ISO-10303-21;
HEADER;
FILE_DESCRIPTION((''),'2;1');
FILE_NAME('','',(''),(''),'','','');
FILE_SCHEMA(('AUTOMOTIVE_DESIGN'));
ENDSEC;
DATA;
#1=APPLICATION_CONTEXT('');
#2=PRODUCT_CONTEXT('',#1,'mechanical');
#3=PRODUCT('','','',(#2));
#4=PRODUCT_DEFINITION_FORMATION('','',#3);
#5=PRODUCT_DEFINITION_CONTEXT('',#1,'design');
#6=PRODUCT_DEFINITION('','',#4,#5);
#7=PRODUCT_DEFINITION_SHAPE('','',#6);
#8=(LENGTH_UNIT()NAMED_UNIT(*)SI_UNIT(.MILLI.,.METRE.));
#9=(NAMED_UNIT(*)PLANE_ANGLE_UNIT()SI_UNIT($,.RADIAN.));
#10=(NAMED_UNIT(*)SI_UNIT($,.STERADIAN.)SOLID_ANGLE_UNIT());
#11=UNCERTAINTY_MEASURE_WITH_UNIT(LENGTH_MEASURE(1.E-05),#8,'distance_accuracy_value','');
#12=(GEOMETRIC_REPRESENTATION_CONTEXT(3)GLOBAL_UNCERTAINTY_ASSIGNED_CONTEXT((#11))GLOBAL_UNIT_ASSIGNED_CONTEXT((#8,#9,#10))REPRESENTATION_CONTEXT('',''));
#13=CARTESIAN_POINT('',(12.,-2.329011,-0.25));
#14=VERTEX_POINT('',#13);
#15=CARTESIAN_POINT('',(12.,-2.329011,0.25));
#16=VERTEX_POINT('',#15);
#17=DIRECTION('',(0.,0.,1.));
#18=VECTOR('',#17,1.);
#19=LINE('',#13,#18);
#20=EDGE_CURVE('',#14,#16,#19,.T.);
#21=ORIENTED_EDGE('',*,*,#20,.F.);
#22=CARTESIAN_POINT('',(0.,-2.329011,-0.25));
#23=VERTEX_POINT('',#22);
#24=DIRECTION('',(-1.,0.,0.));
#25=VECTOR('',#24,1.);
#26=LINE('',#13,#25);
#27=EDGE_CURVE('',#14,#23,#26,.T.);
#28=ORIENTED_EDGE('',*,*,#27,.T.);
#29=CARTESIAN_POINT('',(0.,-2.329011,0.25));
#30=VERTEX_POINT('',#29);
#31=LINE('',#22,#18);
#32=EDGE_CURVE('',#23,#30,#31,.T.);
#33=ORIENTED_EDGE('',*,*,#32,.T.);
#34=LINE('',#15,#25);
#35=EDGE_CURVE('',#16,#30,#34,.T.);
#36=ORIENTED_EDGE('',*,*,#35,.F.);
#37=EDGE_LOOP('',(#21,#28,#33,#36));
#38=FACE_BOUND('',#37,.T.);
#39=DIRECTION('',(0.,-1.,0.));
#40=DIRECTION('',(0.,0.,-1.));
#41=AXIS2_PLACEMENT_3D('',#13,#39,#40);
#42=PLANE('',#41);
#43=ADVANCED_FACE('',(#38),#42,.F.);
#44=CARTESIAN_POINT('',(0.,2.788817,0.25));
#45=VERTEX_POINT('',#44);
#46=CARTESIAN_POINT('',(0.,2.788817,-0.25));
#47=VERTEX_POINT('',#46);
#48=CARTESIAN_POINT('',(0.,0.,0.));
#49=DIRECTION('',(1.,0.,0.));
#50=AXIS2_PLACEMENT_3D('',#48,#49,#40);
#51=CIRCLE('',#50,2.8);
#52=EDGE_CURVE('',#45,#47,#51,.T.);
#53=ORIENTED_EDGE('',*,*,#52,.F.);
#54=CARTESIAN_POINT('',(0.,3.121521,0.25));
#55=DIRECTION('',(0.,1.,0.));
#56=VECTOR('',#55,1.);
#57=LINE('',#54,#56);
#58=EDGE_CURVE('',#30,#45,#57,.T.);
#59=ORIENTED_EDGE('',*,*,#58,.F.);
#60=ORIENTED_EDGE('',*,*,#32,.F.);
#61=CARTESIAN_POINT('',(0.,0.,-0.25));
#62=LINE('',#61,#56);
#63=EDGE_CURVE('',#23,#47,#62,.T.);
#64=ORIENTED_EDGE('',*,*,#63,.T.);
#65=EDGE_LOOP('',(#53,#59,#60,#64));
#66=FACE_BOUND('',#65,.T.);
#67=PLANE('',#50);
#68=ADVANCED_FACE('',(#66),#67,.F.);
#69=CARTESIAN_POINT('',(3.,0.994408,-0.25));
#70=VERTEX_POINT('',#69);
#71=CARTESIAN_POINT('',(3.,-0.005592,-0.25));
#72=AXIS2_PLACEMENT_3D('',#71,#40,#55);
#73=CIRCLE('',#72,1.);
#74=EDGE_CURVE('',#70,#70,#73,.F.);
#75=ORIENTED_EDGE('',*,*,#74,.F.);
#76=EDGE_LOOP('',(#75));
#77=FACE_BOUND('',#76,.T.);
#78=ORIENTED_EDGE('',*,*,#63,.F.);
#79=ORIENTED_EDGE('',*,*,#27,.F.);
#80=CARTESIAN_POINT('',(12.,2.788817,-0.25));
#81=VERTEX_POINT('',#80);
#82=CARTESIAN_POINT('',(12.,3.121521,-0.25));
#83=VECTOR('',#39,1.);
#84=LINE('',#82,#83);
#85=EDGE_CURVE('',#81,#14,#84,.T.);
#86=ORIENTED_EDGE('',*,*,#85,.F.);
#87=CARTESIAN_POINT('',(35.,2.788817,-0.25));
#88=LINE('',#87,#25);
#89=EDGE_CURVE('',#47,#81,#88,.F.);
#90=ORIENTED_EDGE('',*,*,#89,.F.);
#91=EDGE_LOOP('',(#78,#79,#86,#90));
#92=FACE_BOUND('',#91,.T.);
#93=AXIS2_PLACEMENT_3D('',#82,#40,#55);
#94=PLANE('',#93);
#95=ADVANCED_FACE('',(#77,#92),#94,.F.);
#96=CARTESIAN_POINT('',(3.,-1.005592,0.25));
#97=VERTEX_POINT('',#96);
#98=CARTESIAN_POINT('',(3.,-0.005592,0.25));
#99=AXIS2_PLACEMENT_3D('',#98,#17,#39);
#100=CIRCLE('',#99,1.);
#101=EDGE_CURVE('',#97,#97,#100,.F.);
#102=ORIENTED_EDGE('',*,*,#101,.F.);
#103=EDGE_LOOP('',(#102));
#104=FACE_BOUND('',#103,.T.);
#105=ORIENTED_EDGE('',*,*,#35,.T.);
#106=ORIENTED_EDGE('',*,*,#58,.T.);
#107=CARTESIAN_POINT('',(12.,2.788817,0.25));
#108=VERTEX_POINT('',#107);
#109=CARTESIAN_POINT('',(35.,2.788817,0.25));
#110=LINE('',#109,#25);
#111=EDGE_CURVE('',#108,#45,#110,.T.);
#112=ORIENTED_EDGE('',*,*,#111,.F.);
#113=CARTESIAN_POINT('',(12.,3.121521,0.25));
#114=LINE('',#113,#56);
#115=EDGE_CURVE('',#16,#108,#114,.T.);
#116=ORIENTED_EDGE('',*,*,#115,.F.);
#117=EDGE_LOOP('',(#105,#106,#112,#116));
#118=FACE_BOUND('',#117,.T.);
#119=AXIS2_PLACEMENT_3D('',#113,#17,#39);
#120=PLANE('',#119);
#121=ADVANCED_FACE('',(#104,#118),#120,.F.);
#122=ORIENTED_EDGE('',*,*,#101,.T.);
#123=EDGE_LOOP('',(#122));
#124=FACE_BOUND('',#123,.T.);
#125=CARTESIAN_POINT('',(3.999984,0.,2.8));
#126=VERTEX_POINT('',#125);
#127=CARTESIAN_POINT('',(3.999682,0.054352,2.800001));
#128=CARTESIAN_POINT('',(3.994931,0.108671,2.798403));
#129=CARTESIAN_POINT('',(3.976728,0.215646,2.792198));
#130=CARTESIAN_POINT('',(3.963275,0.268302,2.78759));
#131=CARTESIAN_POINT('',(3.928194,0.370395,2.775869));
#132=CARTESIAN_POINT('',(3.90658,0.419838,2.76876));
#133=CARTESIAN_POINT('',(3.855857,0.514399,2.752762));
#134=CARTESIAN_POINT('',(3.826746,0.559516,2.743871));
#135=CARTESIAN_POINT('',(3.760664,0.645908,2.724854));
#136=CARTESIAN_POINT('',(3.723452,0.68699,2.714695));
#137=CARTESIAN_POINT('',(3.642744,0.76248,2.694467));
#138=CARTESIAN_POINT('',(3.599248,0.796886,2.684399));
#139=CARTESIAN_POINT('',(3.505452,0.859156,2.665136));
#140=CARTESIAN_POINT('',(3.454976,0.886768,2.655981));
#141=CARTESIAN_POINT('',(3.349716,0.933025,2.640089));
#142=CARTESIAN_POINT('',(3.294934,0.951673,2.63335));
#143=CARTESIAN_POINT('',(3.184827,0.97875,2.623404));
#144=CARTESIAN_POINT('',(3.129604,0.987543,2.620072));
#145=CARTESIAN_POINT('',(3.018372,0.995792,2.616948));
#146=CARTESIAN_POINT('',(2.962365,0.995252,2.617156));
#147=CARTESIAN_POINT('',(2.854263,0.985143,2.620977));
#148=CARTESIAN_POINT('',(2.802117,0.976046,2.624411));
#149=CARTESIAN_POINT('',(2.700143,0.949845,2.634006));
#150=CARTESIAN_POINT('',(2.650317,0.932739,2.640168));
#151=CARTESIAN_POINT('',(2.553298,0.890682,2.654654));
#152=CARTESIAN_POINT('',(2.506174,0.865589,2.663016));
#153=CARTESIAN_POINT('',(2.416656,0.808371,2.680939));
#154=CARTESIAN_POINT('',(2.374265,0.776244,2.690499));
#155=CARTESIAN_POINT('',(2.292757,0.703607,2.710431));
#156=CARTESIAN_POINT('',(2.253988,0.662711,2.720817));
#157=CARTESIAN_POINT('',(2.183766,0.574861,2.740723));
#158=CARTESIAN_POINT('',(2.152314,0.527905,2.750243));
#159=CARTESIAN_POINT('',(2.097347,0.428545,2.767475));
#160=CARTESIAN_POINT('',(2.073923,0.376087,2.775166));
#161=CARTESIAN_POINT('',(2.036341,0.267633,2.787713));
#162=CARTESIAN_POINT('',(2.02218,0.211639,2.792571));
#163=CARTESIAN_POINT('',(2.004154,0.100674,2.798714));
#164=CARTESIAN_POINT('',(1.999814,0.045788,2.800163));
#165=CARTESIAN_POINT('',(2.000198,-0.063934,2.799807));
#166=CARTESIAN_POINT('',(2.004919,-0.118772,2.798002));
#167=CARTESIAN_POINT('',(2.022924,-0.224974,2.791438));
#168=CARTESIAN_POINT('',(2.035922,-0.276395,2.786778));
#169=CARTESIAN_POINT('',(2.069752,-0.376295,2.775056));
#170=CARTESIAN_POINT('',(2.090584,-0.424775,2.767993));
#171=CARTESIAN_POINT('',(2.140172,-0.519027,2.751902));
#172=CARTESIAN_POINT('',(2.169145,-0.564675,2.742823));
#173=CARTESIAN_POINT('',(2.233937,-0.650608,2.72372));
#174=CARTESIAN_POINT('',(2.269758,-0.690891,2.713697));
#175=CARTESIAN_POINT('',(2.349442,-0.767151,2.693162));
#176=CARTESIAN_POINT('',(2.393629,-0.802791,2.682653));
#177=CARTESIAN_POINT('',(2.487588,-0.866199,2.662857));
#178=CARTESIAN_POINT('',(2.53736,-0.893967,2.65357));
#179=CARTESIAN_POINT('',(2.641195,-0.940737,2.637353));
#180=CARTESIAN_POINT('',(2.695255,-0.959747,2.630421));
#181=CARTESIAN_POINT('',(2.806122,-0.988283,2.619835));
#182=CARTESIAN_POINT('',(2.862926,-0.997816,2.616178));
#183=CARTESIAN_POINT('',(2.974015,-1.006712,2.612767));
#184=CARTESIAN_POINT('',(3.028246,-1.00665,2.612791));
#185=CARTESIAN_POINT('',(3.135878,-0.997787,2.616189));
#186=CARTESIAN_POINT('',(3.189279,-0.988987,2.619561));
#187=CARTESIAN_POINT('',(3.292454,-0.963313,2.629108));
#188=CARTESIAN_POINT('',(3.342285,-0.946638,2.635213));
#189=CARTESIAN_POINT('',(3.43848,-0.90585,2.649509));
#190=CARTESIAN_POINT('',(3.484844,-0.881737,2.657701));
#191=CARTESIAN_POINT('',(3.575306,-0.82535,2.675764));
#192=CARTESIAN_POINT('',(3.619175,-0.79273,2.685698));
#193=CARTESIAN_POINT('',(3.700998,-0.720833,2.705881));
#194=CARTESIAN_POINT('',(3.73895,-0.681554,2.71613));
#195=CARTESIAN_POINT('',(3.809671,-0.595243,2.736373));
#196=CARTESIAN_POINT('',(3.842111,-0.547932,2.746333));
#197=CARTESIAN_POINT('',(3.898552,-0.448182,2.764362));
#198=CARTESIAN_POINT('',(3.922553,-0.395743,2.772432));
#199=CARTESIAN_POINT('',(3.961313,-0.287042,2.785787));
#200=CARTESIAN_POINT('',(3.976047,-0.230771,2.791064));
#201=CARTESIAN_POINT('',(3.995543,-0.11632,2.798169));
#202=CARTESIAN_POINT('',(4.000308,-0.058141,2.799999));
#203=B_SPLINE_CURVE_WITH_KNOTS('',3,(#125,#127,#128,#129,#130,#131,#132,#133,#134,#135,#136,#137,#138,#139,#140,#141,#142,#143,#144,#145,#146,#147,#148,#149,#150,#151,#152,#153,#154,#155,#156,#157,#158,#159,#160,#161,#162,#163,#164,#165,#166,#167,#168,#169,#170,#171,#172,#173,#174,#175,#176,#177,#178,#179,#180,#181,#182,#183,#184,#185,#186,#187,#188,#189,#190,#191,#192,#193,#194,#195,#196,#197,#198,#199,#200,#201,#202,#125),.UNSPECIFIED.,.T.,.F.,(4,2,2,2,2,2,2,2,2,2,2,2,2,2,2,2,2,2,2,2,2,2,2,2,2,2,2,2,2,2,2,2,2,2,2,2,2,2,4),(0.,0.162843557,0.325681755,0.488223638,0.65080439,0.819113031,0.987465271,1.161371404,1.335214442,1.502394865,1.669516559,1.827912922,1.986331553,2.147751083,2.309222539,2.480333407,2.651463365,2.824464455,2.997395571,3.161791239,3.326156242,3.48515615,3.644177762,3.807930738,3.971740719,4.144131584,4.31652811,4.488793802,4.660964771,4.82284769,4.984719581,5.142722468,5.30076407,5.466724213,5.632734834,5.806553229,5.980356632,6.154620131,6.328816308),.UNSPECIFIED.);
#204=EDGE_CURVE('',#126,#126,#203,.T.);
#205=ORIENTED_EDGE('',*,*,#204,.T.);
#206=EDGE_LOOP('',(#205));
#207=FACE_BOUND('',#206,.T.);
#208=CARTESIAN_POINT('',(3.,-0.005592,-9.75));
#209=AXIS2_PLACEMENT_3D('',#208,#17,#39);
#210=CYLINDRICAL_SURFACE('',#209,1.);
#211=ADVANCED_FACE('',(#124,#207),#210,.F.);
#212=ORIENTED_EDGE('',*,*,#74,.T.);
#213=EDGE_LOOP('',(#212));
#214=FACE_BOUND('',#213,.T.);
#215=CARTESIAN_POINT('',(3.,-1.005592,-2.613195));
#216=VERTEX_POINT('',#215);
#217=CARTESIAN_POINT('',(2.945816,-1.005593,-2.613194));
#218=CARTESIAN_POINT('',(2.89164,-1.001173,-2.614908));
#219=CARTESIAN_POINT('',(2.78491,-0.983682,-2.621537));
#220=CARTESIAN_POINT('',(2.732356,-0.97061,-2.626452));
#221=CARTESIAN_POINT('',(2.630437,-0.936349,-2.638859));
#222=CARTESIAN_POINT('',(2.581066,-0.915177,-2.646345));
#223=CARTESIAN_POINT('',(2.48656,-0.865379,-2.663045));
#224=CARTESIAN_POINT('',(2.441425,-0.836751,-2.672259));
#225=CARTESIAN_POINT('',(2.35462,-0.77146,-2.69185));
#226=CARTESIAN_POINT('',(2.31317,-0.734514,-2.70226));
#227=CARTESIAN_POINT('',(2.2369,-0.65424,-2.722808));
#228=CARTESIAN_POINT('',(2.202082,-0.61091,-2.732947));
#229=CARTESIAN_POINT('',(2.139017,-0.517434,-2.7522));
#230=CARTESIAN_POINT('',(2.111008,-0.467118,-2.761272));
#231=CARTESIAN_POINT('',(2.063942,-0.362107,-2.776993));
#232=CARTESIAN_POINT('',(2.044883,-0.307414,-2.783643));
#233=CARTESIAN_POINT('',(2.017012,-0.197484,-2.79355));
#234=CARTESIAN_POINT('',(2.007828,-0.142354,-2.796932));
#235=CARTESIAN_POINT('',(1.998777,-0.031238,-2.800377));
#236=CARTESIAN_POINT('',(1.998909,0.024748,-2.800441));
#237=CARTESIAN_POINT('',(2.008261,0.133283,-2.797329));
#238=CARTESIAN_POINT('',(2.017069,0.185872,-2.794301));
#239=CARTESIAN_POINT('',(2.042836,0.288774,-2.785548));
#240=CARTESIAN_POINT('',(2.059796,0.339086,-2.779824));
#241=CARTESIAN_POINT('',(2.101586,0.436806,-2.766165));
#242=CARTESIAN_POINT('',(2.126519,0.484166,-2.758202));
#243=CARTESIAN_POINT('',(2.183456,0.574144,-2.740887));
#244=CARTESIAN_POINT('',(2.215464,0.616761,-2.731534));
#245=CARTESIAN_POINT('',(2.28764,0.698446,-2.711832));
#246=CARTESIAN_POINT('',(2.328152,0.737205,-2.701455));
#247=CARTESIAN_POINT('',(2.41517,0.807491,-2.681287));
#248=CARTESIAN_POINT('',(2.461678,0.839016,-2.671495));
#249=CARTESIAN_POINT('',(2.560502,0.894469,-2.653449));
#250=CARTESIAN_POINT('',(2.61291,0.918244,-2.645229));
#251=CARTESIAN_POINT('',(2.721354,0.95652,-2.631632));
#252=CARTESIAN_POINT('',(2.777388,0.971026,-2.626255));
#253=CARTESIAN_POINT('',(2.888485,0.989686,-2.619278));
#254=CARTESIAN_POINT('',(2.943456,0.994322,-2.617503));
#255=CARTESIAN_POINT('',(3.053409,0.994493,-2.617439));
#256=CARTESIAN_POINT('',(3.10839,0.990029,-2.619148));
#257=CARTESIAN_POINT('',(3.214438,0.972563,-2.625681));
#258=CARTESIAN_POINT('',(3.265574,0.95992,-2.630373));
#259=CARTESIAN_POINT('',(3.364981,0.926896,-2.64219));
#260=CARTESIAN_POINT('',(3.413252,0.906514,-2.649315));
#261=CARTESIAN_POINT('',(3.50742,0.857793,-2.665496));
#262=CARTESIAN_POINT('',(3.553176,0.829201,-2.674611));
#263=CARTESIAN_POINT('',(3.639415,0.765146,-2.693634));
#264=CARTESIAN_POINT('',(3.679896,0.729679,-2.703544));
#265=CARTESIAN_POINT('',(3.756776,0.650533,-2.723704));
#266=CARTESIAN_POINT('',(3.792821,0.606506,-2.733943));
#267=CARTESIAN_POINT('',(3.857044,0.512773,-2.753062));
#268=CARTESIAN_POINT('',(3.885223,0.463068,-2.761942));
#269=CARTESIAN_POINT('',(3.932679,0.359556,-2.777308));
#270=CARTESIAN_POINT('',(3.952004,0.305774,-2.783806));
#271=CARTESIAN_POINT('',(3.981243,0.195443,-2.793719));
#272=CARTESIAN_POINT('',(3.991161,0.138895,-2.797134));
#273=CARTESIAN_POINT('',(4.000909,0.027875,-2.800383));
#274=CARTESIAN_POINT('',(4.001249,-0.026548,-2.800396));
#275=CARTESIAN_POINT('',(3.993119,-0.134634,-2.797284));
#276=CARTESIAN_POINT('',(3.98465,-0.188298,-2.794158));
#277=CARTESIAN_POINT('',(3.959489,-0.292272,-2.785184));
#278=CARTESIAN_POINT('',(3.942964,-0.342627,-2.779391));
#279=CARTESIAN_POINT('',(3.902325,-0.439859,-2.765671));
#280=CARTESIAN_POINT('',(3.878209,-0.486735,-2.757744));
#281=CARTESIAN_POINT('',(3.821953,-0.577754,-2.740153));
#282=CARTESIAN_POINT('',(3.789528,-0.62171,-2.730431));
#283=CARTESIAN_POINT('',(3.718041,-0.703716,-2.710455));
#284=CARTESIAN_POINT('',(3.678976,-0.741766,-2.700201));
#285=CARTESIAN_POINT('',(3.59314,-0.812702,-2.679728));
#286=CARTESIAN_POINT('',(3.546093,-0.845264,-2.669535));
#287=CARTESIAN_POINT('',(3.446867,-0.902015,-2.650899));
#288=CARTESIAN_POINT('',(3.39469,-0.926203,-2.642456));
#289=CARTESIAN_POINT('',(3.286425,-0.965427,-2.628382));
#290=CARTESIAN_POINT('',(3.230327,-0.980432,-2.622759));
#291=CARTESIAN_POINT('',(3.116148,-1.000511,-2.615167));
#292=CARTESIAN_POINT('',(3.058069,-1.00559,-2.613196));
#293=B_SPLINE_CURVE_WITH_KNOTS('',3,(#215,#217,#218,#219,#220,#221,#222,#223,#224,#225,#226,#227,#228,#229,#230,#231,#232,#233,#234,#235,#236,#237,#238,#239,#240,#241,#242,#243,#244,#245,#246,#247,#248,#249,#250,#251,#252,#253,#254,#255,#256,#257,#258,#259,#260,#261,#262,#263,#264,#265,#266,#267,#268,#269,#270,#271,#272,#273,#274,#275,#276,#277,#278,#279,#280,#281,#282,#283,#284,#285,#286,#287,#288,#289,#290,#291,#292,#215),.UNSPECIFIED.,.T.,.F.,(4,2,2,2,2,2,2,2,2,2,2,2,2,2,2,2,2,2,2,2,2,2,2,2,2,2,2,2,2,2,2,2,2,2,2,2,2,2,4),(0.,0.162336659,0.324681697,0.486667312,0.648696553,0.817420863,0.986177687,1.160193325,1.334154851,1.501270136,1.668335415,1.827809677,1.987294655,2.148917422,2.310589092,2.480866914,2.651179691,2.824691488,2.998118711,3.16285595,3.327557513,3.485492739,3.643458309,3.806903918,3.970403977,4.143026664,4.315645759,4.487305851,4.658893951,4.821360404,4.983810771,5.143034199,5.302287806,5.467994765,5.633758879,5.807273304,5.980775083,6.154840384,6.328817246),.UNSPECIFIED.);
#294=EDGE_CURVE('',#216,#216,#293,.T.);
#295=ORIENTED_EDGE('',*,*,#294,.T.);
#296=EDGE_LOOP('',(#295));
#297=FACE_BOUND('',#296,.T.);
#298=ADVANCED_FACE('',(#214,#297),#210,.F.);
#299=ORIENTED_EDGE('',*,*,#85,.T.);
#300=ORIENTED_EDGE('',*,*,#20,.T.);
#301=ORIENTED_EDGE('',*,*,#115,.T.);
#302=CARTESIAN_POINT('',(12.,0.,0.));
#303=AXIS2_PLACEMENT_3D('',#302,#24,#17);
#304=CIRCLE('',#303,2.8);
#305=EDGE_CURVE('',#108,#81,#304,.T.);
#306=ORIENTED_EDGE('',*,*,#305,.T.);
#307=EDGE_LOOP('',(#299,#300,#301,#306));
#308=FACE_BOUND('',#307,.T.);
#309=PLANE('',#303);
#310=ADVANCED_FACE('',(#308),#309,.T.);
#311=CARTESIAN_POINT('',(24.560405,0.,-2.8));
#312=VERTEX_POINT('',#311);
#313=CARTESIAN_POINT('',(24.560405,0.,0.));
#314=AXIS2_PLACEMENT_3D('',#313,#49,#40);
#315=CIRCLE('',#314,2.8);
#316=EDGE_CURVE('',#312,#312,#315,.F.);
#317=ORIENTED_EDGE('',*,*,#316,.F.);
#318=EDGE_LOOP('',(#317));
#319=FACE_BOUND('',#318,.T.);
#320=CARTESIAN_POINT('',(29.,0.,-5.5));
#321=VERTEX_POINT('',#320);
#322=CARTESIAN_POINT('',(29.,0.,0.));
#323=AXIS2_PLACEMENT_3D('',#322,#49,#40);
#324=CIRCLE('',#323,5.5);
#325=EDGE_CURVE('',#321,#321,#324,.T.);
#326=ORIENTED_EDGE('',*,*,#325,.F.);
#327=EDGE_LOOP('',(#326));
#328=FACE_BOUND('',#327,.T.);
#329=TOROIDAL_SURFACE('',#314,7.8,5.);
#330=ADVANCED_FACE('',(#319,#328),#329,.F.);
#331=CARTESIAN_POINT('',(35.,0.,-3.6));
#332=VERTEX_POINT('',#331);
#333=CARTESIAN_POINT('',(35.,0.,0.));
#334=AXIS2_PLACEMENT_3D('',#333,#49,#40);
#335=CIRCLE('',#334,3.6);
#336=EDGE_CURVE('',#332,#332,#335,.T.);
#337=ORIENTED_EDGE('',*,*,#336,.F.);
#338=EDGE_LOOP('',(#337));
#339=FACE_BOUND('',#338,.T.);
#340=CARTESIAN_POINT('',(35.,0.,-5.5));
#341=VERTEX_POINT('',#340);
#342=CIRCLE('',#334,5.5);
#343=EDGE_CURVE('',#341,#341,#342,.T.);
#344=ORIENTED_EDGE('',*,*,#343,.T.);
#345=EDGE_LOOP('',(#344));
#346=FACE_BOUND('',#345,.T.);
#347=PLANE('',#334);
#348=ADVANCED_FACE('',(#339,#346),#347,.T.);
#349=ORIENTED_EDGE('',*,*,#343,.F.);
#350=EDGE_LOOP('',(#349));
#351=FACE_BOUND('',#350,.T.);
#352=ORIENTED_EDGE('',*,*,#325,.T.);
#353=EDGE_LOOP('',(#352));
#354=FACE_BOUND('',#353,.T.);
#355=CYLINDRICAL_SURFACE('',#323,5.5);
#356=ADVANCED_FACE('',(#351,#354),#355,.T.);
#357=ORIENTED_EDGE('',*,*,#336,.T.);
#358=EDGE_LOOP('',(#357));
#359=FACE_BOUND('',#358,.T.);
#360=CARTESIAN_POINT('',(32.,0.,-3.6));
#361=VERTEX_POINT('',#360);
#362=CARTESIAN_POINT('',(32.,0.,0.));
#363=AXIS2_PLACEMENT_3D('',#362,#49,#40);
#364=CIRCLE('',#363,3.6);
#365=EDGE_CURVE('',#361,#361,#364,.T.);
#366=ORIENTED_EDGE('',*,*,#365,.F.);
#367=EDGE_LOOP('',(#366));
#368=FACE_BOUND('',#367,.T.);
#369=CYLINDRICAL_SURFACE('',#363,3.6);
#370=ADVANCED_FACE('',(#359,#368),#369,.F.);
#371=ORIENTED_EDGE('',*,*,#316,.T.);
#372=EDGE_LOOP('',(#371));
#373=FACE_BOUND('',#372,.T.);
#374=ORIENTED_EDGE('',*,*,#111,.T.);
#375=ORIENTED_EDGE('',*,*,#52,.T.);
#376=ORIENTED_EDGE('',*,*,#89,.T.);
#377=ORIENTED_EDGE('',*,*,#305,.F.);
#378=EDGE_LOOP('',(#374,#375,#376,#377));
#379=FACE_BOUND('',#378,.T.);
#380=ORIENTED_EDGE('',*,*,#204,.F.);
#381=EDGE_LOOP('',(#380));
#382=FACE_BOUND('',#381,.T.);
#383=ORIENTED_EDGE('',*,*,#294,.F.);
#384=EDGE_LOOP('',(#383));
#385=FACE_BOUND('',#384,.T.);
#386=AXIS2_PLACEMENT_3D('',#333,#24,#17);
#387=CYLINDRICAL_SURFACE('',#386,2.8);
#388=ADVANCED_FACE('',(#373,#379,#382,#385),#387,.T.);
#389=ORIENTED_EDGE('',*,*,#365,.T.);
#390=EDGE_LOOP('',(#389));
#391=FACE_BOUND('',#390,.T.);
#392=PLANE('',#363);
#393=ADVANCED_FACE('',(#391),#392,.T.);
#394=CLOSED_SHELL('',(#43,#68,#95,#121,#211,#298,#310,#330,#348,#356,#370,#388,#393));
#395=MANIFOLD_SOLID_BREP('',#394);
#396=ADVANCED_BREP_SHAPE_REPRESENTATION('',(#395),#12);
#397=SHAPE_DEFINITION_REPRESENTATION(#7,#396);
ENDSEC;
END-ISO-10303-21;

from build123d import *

# Parameters (mm, degrees)
SKETCH_1_R               = 2.8
EXTRUDE_1_DEPTH          = 35
SKETCH_2_W               = 0.5
SKETCH_2_H               = 5.450532248
CUT_EXTRUDE_1_DEPTH      = 12
CUT_EXTRUDE_2_DEPTH      = 10
CUT_EXTRUDE_2_DEPTH_BACK = 10
SKETCH_3_R               = 1
SKETCH_4_R               = 5.5
EXTRUDE_2_DEPTH          = 6
SKETCH_5_R               = 3.6
CUT_EXTRUDE_3_DEPTH      = 3
FILLET_1_R               = 5


with BuildPart() as part:
    # 草图1 → 凸台-拉伸1 (new body)
    with BuildSketch(Plane(origin=(0, 0, 0), x_dir=(0, 0, -1), z_dir=(1, 0, 0))):
        Circle(SKETCH_1_R)
    extrude(amount=EXTRUDE_1_DEPTH)

    # 草图2 → 切除-拉伸1 (cut)
    with BuildSketch(Plane.ZY):
        with Locations((0, 0.396255312)):
            Rectangle(SKETCH_2_W, SKETCH_2_H)
    extrude(amount=-CUT_EXTRUDE_1_DEPTH, mode=Mode.SUBTRACT)

    # 草图3 → 切除-拉伸2 (cut, two sides: drawn at the far end of the back side and taken through both)
    with BuildSketch(Plane(origin=(0, 0, 0.25), x_dir=(-1, 0, 0), z_dir=(0, 0, -1)).offset(-CUT_EXTRUDE_2_DEPTH_BACK)):
        with Locations(Location((-3, -0.005591523, 0), (0, 0, 270))):
            Circle(SKETCH_3_R)
    extrude(amount=CUT_EXTRUDE_2_DEPTH + CUT_EXTRUDE_2_DEPTH_BACK, mode=Mode.SUBTRACT)

    # 草图4 → 凸台-拉伸2 (add)
    with BuildSketch(Plane(origin=(35, 0, 0), x_dir=(0, 0, -1), z_dir=(1, 0, 0))):
        Circle(SKETCH_4_R)
    extrude(amount=-EXTRUDE_2_DEPTH)

    # 草图5 → 切除-拉伸3 (cut)
    with BuildSketch(Plane(origin=(35, 0, 0), x_dir=(0, 0, -1), z_dir=(1, 0, 0))):
        Circle(SKETCH_5_R)
    extrude(amount=-CUT_EXTRUDE_3_DEPTH, mode=Mode.SUBTRACT)

    # 圆角1
    # the kernel refuses this fillet: 5 mm, written as the material it adds along each edge
    with BuildSketch(Plane(origin=(29, 0, 0), x_dir=(0, 0, -1), z_dir=(0, 1, 0))) as fillet_1_piece_1:
        with BuildLine():
            CenterArc((7.8, 4.439594576), FILLET_1_R, 180, 62.612892497)
            Line((5.5, 0), (5.454, -0.088791892))
            ThreePointArc((5.454, -0.088791892), (4.15, -0.1), (2.8, -0.1))
            Line((2.8, -0.1), (2.7, 0))
            Line((2.7, 0), (2.7, 4.439594576))
            Line((2.7, 4.439594576), (2.8, 4.439594576))
        make_face()
    revolve(axis=Axis((29, 0, 0), (-1, 0, 0)))


solid = part.part
